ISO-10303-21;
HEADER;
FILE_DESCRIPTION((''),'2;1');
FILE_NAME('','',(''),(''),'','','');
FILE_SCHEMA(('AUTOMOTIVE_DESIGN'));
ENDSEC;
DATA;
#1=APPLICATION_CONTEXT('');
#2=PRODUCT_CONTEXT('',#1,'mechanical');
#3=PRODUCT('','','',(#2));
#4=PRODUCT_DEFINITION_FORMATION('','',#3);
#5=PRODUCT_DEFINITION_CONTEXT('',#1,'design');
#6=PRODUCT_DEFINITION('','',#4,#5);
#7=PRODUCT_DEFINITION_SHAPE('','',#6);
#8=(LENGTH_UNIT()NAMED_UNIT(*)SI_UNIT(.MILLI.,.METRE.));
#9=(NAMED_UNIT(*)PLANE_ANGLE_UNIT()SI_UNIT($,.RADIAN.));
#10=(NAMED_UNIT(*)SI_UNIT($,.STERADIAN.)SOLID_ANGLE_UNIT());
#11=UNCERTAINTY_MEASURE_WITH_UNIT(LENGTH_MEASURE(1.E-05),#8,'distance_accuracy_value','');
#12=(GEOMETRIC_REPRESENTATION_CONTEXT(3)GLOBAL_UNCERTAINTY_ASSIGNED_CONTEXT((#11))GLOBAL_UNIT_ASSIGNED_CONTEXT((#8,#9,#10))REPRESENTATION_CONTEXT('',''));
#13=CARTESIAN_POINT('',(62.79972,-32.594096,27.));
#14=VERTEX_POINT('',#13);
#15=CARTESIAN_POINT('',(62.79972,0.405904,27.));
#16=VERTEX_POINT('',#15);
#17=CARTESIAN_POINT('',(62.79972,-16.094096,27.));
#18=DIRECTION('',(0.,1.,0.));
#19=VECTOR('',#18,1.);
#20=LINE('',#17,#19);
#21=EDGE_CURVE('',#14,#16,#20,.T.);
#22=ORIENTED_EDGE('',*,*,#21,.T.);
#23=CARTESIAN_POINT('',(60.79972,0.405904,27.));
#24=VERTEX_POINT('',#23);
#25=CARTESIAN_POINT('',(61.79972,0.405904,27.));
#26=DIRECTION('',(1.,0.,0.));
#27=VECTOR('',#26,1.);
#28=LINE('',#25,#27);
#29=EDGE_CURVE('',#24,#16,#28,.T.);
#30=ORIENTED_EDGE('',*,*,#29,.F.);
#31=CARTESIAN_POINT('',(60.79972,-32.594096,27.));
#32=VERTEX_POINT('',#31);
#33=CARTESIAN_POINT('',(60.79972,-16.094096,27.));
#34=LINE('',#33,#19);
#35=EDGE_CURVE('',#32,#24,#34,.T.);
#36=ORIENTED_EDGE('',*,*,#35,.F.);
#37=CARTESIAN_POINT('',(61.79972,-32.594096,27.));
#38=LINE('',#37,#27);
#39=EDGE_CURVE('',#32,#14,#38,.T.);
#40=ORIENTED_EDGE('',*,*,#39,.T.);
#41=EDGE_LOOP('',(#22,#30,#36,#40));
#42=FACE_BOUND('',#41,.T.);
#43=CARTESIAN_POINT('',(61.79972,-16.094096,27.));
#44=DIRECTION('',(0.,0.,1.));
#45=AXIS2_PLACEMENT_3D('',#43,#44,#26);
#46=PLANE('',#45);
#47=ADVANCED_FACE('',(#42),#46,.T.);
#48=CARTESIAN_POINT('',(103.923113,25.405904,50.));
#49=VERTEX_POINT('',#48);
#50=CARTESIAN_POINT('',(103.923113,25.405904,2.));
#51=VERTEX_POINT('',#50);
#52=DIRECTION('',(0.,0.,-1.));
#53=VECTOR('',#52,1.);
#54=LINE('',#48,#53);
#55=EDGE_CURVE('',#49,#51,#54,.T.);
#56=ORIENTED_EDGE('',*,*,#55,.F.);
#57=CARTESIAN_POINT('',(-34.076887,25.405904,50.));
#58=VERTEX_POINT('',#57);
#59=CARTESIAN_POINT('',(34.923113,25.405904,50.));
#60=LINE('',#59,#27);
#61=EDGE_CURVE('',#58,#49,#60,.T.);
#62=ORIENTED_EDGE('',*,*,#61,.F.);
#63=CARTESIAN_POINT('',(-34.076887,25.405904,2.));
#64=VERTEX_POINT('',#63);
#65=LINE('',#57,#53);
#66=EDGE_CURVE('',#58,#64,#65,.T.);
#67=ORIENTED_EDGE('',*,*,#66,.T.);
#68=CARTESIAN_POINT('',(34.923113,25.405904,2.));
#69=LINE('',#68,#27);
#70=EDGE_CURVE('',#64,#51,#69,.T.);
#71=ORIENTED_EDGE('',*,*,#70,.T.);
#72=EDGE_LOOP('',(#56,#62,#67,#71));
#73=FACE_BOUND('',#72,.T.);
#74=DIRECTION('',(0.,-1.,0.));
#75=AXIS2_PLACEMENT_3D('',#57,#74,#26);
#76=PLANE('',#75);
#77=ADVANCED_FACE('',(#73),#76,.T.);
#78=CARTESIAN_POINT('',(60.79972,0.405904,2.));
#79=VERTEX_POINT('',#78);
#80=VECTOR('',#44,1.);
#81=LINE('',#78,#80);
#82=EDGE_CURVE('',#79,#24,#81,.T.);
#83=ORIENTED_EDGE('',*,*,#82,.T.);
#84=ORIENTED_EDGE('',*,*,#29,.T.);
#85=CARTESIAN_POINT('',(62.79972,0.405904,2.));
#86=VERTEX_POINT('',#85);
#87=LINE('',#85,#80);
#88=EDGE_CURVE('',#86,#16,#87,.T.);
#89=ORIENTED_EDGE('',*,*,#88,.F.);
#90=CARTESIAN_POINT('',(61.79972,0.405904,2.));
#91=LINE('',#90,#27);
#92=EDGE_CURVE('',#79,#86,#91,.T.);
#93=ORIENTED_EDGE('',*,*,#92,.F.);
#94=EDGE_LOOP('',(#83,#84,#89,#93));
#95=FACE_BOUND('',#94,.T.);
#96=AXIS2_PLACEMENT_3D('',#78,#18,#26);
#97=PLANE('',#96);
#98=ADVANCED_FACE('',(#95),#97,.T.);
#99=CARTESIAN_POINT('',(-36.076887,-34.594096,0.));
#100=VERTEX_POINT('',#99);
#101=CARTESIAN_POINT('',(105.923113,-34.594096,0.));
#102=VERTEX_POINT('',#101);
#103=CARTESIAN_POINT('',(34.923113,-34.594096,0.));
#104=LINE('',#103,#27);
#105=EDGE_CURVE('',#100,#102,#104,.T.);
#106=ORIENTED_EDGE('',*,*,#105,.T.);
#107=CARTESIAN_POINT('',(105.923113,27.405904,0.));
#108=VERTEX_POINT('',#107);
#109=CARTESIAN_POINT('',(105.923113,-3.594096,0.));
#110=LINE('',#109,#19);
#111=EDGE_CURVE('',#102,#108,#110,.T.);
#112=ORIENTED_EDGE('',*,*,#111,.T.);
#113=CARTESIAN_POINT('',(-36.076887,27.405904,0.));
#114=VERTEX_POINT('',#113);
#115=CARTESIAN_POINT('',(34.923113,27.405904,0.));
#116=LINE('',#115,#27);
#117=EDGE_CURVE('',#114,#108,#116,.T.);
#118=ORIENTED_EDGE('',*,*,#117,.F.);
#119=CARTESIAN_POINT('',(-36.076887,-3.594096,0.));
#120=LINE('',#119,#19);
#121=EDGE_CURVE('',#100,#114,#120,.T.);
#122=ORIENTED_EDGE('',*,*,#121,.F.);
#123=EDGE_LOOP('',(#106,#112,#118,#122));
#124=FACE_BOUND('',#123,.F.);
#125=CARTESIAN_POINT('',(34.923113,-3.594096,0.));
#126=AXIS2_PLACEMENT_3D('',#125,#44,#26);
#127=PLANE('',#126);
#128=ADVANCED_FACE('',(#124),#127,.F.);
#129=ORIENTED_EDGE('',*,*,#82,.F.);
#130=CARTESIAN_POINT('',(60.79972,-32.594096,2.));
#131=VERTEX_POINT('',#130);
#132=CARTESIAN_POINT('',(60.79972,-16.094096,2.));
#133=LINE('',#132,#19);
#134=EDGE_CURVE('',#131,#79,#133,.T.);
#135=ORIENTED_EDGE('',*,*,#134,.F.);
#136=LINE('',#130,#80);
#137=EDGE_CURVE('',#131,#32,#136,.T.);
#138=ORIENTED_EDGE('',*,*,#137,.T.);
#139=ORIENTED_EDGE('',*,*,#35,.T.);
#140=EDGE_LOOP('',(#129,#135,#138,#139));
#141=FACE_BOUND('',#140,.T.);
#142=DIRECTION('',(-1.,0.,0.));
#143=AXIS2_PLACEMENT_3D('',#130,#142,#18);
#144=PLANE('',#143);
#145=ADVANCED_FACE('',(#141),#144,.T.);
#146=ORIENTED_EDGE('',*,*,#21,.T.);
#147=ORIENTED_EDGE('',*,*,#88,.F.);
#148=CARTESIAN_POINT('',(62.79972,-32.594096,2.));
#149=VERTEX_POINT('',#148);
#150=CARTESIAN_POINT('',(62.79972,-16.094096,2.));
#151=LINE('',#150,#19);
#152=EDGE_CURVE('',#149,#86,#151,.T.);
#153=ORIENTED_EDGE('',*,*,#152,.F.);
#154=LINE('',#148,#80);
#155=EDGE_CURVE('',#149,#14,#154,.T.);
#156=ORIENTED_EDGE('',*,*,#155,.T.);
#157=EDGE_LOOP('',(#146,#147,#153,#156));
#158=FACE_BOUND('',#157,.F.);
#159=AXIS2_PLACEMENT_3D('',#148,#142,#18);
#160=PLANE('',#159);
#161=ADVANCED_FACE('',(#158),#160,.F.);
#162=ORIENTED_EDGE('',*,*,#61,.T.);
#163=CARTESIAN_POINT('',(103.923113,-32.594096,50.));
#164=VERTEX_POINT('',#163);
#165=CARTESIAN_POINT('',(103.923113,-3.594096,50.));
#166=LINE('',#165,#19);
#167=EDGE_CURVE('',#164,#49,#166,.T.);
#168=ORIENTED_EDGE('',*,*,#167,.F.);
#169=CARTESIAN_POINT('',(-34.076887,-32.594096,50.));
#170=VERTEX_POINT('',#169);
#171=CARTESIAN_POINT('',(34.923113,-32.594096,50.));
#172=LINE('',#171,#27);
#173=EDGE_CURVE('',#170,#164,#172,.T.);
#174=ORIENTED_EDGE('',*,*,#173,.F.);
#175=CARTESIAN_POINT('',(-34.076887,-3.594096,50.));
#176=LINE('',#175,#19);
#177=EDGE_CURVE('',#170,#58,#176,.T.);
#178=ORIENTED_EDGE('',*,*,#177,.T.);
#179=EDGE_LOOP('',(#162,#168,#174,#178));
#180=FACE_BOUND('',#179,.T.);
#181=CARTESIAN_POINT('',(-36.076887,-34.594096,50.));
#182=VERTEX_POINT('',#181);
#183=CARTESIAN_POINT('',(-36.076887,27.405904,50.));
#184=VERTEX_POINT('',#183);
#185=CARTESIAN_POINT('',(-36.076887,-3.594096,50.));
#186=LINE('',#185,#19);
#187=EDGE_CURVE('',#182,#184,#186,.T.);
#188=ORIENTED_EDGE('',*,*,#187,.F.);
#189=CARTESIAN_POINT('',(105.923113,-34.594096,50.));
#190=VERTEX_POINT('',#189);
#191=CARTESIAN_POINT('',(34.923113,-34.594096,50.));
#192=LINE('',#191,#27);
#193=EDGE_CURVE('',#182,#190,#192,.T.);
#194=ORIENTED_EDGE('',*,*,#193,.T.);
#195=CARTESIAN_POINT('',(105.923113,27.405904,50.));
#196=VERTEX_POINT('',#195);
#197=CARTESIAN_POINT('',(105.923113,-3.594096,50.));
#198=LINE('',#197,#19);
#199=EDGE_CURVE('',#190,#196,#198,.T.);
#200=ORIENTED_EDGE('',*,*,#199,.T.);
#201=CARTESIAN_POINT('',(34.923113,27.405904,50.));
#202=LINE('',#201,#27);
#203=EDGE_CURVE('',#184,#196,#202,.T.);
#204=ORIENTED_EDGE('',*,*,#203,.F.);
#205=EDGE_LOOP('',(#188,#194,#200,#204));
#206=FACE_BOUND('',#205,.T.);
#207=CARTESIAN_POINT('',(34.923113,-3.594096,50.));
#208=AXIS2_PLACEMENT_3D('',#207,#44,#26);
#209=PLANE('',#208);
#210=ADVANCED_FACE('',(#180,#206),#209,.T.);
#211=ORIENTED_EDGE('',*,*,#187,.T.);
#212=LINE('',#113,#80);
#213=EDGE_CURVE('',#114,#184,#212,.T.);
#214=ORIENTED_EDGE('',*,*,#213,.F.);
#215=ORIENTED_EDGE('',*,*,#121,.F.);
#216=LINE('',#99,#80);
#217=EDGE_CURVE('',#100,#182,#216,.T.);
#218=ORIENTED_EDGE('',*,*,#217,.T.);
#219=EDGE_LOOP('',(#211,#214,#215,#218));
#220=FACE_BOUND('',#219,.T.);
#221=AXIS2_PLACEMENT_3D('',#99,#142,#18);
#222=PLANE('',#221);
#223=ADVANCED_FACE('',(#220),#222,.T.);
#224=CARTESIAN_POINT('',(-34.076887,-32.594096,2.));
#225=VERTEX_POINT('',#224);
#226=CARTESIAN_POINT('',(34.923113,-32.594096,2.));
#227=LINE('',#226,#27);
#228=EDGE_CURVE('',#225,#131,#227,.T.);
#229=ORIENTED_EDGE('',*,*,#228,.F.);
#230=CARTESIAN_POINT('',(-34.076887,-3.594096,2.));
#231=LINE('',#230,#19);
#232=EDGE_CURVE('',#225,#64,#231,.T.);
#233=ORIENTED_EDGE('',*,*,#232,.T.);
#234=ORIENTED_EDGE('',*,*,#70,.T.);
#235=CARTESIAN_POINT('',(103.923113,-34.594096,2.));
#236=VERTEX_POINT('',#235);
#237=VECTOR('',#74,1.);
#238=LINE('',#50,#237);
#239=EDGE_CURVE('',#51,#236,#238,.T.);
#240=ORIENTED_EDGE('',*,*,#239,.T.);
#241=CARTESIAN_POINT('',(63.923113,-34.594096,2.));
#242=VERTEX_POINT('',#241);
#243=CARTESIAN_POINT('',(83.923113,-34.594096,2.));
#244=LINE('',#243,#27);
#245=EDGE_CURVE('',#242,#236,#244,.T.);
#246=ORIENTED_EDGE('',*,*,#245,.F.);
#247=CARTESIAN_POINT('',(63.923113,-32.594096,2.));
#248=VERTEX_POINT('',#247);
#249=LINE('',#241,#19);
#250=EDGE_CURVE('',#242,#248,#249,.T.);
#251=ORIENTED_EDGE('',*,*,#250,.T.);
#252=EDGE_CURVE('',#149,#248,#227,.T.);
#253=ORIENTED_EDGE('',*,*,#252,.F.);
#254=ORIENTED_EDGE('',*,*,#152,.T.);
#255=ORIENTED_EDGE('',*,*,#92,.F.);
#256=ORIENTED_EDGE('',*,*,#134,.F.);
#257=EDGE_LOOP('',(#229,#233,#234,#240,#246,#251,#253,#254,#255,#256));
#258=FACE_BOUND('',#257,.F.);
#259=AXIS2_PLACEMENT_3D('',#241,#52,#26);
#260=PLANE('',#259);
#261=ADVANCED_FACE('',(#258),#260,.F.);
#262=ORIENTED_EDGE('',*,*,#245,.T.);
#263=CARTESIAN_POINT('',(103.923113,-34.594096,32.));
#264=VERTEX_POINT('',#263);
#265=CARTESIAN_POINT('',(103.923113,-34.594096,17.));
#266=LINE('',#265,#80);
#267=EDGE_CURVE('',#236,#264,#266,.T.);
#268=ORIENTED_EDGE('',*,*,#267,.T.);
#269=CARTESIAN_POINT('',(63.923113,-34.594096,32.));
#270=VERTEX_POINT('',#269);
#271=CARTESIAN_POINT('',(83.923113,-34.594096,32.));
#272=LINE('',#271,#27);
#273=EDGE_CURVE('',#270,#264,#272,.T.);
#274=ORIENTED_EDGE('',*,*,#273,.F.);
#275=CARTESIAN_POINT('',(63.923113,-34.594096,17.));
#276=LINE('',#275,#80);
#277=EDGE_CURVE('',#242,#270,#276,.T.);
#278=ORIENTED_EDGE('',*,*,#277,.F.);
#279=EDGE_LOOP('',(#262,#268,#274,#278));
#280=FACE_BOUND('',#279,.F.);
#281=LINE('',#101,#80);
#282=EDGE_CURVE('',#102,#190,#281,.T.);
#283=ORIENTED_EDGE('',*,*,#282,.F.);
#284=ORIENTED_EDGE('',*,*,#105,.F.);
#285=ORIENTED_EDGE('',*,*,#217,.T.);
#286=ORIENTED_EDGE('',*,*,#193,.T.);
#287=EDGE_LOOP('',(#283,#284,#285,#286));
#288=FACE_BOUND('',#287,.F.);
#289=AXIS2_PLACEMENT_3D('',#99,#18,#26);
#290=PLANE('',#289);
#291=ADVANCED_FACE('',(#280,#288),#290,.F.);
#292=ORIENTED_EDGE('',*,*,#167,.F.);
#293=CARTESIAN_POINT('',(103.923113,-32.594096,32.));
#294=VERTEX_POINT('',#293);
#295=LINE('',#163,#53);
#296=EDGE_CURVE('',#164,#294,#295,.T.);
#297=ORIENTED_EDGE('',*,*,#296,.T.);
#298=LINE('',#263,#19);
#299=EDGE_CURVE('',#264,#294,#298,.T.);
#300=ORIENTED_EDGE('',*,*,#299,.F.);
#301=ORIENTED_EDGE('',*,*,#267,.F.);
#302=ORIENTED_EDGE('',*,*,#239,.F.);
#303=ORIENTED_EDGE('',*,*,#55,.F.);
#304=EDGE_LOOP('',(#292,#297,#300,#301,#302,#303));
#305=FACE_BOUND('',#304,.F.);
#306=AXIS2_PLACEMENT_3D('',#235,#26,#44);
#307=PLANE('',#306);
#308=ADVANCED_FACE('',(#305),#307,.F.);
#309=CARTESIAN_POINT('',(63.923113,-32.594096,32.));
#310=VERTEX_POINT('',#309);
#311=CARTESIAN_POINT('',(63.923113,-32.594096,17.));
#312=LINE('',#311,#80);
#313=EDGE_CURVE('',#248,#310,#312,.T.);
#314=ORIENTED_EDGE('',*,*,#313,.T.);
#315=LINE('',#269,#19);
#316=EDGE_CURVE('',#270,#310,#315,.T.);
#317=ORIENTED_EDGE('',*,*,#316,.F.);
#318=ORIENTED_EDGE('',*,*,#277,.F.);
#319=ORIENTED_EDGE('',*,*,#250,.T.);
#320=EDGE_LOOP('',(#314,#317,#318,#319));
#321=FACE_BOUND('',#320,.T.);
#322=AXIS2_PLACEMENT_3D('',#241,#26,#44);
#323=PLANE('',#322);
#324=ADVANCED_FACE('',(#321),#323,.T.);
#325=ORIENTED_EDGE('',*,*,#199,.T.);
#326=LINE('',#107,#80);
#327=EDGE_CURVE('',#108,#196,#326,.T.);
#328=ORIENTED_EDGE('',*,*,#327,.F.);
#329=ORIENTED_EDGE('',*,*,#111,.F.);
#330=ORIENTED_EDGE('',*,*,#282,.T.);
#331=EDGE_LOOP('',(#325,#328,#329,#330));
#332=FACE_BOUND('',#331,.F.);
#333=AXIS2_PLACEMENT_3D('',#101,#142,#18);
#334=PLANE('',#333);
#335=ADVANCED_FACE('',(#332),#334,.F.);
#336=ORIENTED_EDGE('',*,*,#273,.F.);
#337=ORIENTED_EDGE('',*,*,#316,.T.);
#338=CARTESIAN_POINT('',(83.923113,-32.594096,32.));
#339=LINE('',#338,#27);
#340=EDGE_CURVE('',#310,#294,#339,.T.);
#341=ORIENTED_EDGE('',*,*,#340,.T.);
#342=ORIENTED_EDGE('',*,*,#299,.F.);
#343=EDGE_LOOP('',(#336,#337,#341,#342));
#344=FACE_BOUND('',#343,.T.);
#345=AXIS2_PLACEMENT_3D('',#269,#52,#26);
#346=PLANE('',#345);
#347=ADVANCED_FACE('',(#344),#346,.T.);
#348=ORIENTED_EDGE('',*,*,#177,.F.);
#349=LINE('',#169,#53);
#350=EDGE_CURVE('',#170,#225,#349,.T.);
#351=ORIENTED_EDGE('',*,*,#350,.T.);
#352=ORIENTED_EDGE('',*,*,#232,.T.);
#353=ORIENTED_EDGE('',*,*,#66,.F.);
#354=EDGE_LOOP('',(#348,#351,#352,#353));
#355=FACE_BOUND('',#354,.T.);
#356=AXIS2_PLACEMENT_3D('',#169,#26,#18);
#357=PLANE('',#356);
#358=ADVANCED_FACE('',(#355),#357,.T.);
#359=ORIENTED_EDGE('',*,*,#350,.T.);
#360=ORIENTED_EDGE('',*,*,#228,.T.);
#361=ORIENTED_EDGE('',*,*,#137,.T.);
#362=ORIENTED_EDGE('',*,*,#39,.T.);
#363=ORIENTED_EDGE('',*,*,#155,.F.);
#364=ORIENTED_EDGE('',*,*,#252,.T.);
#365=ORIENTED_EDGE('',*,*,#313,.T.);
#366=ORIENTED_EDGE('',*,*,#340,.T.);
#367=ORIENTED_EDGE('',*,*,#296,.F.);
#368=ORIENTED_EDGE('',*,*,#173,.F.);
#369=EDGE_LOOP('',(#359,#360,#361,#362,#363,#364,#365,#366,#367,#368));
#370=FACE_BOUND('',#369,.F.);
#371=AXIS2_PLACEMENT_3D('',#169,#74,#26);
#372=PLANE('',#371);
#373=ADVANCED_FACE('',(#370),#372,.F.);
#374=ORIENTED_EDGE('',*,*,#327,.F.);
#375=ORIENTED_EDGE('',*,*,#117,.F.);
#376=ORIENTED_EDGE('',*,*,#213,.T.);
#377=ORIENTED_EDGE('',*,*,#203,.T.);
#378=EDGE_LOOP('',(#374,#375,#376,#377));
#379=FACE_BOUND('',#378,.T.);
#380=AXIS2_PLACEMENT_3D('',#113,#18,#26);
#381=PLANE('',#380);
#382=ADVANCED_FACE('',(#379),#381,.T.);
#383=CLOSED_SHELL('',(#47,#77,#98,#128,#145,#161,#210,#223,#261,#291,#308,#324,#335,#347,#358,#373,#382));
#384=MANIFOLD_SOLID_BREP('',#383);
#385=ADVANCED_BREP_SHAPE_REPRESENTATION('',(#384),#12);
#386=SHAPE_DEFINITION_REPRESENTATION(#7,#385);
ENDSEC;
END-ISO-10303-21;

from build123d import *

# Parameters (mm, degrees)
F0_W     = 142
F0_H     = 62
F1_DEPTH = 50
F2_W     = 138
F2_H     = 58
F3_DEPTH = 48
F6_W     = 40
F6_H     = 30
F7_DEPTH = 2
F8_W     = 2
F8_H     = 33
F9_DEPTH = 25


# Not quite as in the source:
# - a feature names something its author has since deleted; it is built from what else it names


with BuildPart() as f1:
    # F0 (on Top) → F1 (new body)
    with BuildSketch(Plane.XY):
        with Locations((34.9231133461, -3.5940962459)):
            Rectangle(F0_W, F0_H)
    extrude(amount=F1_DEPTH)

    # F2 (on face) → F3 (cut)
    with BuildSketch(Plane.XY.offset(50)):
        with Locations((34.9231133461, -3.5940962459)):
            Rectangle(F2_W, F2_H)
    extrude(amount=-F3_DEPTH, mode=Mode.SUBTRACT)

    # F6 (on face) → F7 (cut)
    with BuildSketch(Plane.XZ.offset(34.5940962459)):
        with Locations((83.9231133461, 17)):
            Rectangle(F6_W, F6_H)
    extrude(amount=-F7_DEPTH, mode=Mode.SUBTRACT)

    # F8 (on face) → F9 (join)
    with BuildSketch(Plane.XY.offset(2)):
        with Locations((61.7997199297, -16.0940962459)):
            Rectangle(F8_W, F8_H)
    extrude(amount=F9_DEPTH)


solid = f1.part
